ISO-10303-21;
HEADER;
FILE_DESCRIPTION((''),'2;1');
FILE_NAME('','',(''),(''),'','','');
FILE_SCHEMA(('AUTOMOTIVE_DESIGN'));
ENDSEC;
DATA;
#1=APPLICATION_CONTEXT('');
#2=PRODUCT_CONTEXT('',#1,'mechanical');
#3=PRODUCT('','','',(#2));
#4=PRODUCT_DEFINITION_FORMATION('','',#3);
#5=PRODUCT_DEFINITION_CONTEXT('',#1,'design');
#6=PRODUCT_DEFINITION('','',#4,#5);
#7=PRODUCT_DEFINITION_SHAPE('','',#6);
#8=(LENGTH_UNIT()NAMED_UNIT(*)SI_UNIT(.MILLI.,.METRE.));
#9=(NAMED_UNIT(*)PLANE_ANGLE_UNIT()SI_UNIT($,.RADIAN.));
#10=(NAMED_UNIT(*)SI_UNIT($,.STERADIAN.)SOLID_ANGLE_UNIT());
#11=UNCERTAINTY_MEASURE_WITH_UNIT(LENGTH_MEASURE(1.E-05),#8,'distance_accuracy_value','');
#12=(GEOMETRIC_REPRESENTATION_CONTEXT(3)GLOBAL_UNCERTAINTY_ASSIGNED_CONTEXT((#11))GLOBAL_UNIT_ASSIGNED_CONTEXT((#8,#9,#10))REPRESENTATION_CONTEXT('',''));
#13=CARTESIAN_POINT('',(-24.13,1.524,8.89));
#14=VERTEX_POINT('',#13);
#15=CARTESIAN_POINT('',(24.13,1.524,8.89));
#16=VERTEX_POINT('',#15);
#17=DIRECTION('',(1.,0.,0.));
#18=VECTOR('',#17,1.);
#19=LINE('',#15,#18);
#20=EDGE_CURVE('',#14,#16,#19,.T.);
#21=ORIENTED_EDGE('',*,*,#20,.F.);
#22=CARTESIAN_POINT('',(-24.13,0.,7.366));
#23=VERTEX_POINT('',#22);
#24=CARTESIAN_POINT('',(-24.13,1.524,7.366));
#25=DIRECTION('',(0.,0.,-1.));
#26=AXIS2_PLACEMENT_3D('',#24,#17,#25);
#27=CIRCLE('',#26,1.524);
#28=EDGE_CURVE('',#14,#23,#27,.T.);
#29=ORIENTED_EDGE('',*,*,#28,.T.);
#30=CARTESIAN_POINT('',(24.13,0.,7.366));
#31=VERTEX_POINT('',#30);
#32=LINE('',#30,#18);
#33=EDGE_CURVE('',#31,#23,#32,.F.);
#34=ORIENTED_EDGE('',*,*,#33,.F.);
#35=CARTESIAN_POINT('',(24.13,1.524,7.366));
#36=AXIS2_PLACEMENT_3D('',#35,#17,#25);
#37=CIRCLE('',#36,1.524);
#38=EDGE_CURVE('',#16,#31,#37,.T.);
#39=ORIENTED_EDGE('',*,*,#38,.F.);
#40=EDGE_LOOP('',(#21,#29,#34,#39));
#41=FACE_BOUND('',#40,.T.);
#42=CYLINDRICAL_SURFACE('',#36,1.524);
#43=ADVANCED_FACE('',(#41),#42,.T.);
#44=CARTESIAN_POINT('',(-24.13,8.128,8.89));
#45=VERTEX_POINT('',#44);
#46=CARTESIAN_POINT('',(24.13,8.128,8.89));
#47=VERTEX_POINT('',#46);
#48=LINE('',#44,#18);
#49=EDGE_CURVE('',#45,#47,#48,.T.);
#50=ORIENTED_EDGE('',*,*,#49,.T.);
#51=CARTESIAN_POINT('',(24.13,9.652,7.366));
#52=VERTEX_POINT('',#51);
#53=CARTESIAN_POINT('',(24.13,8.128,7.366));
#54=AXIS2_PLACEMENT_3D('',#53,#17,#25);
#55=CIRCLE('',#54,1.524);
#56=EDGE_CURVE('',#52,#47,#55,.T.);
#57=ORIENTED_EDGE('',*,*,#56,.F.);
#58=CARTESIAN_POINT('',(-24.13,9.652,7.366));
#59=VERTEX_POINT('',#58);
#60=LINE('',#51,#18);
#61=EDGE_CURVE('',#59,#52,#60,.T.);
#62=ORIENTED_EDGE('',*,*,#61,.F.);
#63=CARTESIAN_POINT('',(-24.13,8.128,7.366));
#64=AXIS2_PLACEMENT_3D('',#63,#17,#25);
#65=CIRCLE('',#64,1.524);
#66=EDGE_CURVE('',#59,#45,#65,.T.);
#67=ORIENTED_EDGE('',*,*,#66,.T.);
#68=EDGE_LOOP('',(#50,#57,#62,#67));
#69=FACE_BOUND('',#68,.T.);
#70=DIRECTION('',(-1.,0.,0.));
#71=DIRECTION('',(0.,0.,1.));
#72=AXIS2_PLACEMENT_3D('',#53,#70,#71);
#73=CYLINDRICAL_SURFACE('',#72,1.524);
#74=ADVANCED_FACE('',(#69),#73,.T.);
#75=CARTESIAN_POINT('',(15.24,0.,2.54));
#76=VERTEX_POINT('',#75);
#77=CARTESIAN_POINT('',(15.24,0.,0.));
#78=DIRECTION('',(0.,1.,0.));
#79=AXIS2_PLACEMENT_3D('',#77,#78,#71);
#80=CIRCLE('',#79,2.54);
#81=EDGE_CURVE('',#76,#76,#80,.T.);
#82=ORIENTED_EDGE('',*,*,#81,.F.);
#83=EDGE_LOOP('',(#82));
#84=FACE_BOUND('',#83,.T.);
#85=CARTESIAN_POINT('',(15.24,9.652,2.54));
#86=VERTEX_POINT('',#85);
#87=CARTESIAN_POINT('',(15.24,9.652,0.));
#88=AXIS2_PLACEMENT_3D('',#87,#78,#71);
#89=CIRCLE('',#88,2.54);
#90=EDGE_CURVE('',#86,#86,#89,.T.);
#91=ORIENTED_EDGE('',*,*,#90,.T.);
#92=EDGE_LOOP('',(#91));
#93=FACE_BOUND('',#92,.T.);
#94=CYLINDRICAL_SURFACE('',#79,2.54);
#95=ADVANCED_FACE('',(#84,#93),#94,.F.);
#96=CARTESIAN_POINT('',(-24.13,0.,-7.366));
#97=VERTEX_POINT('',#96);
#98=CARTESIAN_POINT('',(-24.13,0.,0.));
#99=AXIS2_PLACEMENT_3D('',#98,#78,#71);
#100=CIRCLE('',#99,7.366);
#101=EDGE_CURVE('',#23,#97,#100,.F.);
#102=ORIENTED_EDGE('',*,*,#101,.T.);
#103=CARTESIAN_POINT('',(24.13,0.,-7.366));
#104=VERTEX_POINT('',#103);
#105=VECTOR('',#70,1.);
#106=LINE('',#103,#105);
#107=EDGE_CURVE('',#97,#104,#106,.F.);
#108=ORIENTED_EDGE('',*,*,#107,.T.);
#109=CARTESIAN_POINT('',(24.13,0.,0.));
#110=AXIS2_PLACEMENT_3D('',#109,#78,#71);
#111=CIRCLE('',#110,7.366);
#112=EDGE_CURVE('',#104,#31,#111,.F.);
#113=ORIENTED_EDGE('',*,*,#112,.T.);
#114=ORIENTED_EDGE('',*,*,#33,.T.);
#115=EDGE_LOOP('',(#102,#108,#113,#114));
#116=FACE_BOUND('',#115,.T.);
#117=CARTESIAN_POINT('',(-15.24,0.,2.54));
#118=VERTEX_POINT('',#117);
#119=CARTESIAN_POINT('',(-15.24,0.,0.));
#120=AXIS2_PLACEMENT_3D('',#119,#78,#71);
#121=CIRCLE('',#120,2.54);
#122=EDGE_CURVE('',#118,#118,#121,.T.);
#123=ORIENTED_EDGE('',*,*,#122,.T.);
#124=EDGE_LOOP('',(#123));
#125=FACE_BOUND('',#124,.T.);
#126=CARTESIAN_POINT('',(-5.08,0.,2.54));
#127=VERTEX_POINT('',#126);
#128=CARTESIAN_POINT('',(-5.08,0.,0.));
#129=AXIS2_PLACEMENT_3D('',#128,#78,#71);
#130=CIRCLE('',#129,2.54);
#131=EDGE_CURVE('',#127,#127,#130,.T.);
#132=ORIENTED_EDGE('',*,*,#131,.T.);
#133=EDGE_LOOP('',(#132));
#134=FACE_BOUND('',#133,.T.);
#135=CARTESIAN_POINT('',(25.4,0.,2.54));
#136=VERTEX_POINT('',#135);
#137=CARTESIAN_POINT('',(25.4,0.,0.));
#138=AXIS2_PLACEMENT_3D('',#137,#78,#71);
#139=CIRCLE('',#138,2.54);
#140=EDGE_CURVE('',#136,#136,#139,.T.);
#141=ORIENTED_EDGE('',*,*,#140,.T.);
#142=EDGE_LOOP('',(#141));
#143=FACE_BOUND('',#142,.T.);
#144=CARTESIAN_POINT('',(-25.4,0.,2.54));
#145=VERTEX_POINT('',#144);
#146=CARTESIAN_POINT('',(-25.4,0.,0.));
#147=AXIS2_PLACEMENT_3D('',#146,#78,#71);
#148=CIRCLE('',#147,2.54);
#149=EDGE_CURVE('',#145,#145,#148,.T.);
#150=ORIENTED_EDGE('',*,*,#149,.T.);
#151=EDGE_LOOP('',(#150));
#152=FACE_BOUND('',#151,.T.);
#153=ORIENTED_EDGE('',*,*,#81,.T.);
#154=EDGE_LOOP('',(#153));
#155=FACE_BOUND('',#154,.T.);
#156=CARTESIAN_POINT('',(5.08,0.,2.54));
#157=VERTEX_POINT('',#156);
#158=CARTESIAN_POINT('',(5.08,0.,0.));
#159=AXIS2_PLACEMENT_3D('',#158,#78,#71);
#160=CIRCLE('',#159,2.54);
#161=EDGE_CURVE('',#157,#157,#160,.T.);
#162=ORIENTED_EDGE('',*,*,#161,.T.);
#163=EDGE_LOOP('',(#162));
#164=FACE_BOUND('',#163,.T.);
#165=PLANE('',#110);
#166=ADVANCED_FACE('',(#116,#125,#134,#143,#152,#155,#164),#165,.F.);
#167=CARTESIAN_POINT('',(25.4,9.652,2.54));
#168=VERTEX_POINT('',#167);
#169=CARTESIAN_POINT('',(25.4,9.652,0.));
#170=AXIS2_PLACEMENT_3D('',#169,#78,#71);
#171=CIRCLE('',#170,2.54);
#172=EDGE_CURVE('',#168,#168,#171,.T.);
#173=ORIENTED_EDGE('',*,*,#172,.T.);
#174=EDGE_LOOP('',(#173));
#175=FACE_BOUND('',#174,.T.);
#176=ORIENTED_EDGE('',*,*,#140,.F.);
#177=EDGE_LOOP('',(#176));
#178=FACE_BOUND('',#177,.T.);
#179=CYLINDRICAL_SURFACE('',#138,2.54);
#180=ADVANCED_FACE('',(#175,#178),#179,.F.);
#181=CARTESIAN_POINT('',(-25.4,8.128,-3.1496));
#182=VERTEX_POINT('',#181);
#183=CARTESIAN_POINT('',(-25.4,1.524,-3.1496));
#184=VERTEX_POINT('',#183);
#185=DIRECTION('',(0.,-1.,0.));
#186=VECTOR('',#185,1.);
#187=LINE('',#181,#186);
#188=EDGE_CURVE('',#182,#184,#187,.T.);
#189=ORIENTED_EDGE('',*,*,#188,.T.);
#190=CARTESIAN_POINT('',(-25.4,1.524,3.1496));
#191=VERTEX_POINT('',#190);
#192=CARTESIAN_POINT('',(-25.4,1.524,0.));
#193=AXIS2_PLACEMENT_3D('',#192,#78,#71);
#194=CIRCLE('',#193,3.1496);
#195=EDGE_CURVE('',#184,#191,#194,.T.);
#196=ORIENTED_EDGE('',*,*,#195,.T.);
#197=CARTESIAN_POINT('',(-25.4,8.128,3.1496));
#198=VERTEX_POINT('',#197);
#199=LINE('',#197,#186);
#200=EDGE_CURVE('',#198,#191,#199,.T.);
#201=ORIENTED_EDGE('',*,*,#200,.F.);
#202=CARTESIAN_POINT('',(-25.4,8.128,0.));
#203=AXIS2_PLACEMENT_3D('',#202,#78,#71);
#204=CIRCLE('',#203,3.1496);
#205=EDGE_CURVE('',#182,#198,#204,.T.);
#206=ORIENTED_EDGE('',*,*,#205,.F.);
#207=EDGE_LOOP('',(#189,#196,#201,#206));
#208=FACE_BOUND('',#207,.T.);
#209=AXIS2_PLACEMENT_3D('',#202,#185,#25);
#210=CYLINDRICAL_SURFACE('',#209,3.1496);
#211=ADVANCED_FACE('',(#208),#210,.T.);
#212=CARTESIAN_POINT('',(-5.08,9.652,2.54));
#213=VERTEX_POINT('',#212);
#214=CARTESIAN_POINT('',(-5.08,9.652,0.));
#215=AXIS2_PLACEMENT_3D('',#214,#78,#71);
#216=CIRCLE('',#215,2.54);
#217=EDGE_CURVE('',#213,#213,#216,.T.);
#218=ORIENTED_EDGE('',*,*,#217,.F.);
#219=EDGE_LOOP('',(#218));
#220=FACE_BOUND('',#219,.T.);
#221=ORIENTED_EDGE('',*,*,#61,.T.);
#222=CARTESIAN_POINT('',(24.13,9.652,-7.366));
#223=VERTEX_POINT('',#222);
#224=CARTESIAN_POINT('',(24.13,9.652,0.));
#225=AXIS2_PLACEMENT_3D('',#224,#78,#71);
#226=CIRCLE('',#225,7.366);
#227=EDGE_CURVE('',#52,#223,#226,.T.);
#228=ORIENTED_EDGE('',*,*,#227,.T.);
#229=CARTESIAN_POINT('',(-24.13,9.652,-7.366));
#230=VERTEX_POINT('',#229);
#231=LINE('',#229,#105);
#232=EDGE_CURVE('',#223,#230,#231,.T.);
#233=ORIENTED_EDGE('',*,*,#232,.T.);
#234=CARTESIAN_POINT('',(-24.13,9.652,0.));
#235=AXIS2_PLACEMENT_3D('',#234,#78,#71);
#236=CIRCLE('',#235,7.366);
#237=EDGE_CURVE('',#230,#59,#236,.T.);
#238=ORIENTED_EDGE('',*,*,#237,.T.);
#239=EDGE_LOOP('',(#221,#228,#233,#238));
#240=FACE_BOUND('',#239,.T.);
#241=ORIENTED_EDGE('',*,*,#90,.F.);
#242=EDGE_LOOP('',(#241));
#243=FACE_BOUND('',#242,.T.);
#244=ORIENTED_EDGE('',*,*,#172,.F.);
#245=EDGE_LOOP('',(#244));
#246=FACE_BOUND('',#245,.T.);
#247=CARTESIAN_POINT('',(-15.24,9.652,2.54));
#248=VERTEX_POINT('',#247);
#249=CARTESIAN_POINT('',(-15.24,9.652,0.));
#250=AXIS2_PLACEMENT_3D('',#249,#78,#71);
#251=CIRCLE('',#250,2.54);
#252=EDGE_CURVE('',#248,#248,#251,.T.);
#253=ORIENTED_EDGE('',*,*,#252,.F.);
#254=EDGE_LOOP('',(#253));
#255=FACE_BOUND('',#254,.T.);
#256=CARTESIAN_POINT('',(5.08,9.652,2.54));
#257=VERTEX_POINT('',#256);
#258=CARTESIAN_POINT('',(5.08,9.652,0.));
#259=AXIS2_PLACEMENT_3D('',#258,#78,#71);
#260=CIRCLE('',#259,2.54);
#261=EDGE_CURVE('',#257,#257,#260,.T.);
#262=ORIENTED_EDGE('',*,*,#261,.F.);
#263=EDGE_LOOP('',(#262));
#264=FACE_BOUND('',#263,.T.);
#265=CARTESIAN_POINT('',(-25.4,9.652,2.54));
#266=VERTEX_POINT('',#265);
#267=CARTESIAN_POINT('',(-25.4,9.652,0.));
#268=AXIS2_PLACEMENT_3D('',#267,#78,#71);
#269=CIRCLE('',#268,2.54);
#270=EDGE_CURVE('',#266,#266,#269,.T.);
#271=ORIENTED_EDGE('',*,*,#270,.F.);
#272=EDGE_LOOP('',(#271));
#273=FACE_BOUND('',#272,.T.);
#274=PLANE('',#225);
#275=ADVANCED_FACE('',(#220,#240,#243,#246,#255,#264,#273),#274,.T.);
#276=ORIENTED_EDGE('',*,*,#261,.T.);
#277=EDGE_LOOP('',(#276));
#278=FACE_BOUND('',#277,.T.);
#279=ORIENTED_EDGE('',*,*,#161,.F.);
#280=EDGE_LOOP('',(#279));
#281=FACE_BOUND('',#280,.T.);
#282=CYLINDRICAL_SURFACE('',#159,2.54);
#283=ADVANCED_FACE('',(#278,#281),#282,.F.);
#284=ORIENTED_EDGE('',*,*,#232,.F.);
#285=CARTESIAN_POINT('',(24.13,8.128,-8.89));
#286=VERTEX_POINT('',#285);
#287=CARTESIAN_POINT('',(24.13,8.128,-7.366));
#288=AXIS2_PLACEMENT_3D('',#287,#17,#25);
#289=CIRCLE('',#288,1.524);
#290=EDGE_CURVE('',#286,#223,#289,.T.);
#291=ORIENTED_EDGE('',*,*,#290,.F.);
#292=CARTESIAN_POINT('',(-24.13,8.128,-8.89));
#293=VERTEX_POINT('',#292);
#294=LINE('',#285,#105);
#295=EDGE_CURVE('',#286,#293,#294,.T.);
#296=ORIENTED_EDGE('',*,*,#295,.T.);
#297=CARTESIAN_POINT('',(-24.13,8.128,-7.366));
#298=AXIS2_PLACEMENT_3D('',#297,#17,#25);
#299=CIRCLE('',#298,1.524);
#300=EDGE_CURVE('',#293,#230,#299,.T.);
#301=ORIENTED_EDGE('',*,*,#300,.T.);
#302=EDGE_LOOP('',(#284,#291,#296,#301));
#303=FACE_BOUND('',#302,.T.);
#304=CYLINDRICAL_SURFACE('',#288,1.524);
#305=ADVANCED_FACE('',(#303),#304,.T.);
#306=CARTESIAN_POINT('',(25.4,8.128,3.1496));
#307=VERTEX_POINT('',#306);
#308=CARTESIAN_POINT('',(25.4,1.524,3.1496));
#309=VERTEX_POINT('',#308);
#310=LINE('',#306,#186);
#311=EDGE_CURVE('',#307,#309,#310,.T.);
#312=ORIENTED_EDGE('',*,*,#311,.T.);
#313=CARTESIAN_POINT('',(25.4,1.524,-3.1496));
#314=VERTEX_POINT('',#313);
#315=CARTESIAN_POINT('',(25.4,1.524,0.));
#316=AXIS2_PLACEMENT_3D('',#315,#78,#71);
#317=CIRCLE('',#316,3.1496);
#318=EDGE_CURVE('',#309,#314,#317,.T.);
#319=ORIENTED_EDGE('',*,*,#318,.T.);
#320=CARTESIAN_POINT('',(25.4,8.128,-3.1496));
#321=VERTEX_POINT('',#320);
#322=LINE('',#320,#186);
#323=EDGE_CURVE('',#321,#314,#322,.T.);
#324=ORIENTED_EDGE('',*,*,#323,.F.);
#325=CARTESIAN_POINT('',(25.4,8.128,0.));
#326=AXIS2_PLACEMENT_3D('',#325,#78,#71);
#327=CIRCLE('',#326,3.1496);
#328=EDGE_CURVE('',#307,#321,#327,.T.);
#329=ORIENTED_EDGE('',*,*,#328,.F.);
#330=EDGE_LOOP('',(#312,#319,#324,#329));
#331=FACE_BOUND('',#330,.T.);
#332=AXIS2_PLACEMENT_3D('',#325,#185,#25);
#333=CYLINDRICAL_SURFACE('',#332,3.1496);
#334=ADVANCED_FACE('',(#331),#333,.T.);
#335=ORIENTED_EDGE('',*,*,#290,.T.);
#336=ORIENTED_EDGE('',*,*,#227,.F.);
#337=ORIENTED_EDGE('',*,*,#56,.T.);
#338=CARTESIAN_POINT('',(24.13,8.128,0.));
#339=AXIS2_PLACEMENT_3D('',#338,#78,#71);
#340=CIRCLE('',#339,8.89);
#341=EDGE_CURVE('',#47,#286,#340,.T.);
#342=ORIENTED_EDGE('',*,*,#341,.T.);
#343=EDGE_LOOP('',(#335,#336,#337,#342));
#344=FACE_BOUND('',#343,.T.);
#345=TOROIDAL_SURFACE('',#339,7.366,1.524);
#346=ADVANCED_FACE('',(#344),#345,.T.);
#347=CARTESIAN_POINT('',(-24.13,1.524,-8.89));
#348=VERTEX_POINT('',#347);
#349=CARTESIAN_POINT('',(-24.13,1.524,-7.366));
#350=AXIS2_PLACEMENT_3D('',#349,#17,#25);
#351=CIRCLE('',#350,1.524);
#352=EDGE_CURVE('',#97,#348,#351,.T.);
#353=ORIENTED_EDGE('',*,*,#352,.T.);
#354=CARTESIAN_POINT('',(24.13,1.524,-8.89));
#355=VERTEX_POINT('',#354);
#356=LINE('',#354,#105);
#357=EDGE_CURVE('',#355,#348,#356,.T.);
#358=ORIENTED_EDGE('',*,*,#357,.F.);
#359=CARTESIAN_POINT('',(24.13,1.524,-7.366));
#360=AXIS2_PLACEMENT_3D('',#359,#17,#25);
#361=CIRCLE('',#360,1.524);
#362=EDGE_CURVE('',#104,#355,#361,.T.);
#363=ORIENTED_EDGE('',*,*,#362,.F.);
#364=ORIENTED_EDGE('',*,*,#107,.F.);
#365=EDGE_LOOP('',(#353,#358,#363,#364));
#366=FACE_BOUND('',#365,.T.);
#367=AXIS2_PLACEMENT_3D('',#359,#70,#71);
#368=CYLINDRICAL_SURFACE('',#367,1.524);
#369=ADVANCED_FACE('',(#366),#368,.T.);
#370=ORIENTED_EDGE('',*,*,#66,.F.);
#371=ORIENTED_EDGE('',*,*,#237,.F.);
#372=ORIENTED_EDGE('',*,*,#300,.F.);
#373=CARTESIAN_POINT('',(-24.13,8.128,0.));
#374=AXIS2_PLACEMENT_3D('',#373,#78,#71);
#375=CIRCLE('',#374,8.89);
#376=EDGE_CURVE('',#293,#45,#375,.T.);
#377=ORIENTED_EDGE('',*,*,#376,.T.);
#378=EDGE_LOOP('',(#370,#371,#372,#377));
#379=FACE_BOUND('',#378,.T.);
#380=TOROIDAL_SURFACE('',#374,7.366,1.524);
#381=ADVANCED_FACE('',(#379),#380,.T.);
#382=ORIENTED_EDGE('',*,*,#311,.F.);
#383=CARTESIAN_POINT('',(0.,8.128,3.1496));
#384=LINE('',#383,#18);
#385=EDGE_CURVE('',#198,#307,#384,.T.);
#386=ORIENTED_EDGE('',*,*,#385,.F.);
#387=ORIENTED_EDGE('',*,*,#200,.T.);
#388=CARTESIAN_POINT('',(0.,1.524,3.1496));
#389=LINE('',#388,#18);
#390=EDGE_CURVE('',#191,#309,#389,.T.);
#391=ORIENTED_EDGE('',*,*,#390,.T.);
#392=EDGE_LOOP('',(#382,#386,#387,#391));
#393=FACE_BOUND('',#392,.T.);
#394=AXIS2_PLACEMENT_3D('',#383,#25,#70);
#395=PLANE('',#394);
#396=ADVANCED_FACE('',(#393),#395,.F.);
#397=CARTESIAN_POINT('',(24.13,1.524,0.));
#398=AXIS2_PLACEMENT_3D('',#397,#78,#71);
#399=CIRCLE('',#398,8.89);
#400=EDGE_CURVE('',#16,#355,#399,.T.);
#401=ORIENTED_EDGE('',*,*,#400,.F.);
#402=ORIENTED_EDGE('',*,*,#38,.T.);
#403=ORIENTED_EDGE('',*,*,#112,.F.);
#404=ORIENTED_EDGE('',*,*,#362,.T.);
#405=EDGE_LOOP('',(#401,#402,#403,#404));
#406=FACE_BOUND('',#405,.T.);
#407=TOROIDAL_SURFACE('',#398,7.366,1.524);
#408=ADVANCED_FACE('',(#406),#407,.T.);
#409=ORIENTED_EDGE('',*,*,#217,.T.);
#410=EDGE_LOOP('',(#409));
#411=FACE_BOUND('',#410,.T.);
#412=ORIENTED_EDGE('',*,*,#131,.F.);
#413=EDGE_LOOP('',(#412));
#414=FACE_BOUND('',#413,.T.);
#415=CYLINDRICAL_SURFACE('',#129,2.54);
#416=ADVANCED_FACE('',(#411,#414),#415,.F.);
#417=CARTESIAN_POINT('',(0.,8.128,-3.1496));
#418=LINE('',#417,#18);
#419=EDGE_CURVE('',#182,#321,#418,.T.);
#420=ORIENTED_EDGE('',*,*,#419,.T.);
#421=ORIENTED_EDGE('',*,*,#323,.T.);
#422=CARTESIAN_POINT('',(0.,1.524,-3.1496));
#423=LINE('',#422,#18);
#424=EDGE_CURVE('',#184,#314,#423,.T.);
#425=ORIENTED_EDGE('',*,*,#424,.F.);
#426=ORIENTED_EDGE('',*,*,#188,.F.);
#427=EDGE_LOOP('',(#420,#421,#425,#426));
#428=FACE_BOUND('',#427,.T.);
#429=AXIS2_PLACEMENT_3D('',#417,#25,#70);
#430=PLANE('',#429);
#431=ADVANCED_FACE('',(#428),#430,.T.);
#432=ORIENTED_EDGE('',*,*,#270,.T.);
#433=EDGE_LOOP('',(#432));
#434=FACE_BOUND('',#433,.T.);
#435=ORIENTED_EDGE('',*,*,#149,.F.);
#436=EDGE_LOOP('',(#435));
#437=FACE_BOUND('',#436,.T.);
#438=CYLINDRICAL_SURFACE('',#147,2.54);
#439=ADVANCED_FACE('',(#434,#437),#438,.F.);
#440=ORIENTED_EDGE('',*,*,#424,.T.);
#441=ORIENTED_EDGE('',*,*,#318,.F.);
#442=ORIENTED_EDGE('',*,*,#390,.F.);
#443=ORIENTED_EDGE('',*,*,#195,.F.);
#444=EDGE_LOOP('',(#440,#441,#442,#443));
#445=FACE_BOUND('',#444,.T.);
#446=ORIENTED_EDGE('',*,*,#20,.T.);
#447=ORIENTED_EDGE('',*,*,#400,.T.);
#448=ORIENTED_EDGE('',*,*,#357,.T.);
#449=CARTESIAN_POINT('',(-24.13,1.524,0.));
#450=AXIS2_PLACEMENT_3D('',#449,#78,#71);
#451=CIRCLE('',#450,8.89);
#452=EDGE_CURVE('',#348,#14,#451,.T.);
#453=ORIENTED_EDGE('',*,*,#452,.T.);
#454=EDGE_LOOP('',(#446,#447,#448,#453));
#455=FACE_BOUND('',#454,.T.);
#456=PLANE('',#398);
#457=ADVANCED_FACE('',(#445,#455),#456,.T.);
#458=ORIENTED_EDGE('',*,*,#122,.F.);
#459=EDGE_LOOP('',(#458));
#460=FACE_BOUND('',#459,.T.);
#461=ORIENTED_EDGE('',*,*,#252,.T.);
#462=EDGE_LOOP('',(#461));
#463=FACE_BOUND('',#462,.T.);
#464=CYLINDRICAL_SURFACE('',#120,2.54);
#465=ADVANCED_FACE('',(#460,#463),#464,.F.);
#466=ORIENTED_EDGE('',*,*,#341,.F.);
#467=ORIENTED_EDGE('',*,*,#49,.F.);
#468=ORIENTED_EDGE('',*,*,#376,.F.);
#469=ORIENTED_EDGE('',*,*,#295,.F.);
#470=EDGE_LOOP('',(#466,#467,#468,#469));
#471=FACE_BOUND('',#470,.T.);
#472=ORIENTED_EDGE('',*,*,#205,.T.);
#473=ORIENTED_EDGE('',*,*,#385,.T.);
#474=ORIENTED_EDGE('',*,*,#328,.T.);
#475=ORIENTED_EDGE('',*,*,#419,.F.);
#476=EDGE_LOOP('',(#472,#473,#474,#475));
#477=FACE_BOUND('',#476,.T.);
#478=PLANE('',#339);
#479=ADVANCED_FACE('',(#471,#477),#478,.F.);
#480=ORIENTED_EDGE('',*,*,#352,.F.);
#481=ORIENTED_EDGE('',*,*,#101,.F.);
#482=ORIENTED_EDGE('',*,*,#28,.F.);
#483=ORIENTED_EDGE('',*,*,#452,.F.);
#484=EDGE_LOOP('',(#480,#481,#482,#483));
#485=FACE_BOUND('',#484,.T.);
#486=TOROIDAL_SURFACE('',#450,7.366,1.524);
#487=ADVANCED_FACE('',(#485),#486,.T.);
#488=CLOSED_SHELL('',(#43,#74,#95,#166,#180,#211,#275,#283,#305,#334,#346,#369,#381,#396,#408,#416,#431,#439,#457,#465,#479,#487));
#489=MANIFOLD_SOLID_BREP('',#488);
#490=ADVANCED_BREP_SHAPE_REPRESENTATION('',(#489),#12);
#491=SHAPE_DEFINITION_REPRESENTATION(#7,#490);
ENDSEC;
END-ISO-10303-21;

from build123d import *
from build123d.topology import SkipClean

# Parameters (mm, degrees)
BOSS_EXTRUDE1_DEPTH     = 1.524
SKETCH2_R               = 1.27
BOSS_EXTRUDE2_DEPTH     = 6.604
BOSS_EXTRUDE3_DEPTH     = 1.524
FILLET1_R               = 1.524
CUT_EXTRUDE1_DEPTH      = 36.148497607
CUT_EXTRUDE1_DEPTH_BACK = 36.148497607
SKETCH2_3_R             = 1.27
CUT_EXTRUDE2_DEPTH      = 36.531867443
CUT_EXTRUDE2_DEPTH_BACK = 36.531867443
SKETCH4_R               = 2.54


with BuildPart() as part:
    # Sketch1 → Boss-Extrude1 (new body)
    with BuildSketch(Plane(origin=(0, 0, 0), x_dir=(1, 0, 0), z_dir=(0, 1, 0))):
        with BuildLine():
            Line((24.13, -8.89), (-24.13, -8.89))
            ThreePointArc((-24.13, -8.89), (-33.02, 0), (-24.13, 8.89))
            Line((-24.13, 8.89), (24.13, 8.89))
            ThreePointArc((24.13, 8.89), (33.02, 0), (24.13, -8.89))
        make_face()
    extrude(amount=BOSS_EXTRUDE1_DEPTH)

    # Sketch2 → Boss-Extrude2 (add)
    # profile 1 of 35: a face of its own
    with BuildSketch(Plane(origin=(0, 1.524, 0), x_dir=(1, 0, 0), z_dir=(0, 1, 0))):
        with BuildLine():
            ThreePointArc((-22.643661095, 1.524), (-23.8000016, 2.71292928), (-25.4, 3.1496))
            ThreePointArc((-25.4, 3.1496), (-28.5496, 0), (-25.4, -3.1496))
            ThreePointArc((-25.4, -3.1496), (-23.8000016, -2.71292928), (-22.643661095, -1.524))
            Line((-22.643661095, -1.524), (-25.4, -1.524))
            Line((-25.4, -1.524), (-25.4, -1.27))
            ThreePointArc((-25.4, -1.27), (-26.67, 0), (-25.4, 1.27))
            Line((-25.4, 1.27), (-25.4, 1.524))
            Line((-25.4, 1.524), (-22.643661095, 1.524))
        make_face()
    # profile 2 of 35: a face of its own
    with BuildSketch(Plane(origin=(0, 1.524, 0), x_dir=(1, 0, 0), z_dir=(0, 1, 0))):
        with BuildLine():
            ThreePointArc((-22.2504, 0), (-22.35029959, 0.786960972), (-22.643661095, 1.524))
            Line((-22.643661095, 1.524), (-25.4, 1.524))
            Line((-25.4, 1.524), (-25.4, 1.27))
            ThreePointArc((-25.4, 1.27), (-24.501974388, 0.898025612), (-24.13, 0))
            ThreePointArc((-24.13, 0), (-24.501974388, -0.898025612), (-25.4, -1.27))
            Line((-25.4, -1.27), (-25.4, -1.524))
            Line((-25.4, -1.524), (-22.643661095, -1.524))
            ThreePointArc((-22.643661095, -1.524), (-22.35029959, -0.786960972), (-22.2504, 0))
        make_face()
    # profile 3 of 35: a face of its own
    with BuildSketch(Plane(origin=(0, 1.524, 0), x_dir=(1, 0, 0), z_dir=(0, 1, 0))):
        with BuildLine():
            Line((-15.24, 3.1496), (-25.4, 3.1496))
            ThreePointArc((-25.4, 3.1496), (-23.8000016, 2.71292928), (-22.643661095, 1.524))
            Line((-22.643661095, 1.524), (-17.996338905, 1.524))
            ThreePointArc((-17.996338905, 1.524), (-16.8399984, 2.71292928), (-15.24, 3.1496))
        make_face()
    # profile 4 of 35: a face of its own
    with BuildSketch(Plane(origin=(0, 1.524, 0), x_dir=(1, 0, 0), z_dir=(0, 1, 0))):
        with BuildLine():
            Line((-17.996338905, 1.524), (-22.643661095, 1.524))
            ThreePointArc((-22.643661095, 1.524), (-22.35029959, 0.786960972), (-22.2504, 0))
            ThreePointArc((-22.2504, 0), (-22.35029959, -0.786960972), (-22.643661095, -1.524))
            Line((-22.643661095, -1.524), (-17.996338905, -1.524))
            ThreePointArc((-17.996338905, -1.524), (-18.3896, 0), (-17.996338905, 1.524))
        make_face()
    # profile 5 of 35: a face of its own
    with BuildSketch(Plane(origin=(0, 1.524, 0), x_dir=(1, 0, 0), z_dir=(0, 1, 0))):
        with BuildLine():
            ThreePointArc((-22.643661095, 1.524), (-23.8000016, 2.71292928), (-25.4, 3.1496))
            ThreePointArc((-25.4, 3.1496), (-28.5496, 0), (-25.4, -3.1496))
            ThreePointArc((-25.4, -3.1496), (-23.8000016, -2.71292928), (-22.643661095, -1.524))
            Line((-22.643661095, -1.524), (-25.4, -1.524))
            Line((-25.4, -1.524), (-25.4, -1.27))
            ThreePointArc((-25.4, -1.27), (-26.67, 0), (-25.4, 1.27))
            Line((-25.4, 1.27), (-25.4, 1.524))
            Line((-25.4, 1.524), (-22.643661095, 1.524))
        make_face()
    # profile 6 of 35: a face of its own
    with BuildSketch(Plane(origin=(0, 1.524, 0), x_dir=(1, 0, 0), z_dir=(0, 1, 0))):
        with BuildLine():
            ThreePointArc((-22.2504, 0), (-22.35029959, 0.786960972), (-22.643661095, 1.524))
            Line((-22.643661095, 1.524), (-25.4, 1.524))
            Line((-25.4, 1.524), (-25.4, 1.27))
            ThreePointArc((-25.4, 1.27), (-24.501974388, 0.898025612), (-24.13, 0))
            ThreePointArc((-24.13, 0), (-24.501974388, -0.898025612), (-25.4, -1.27))
            Line((-25.4, -1.27), (-25.4, -1.524))
            Line((-25.4, -1.524), (-22.643661095, -1.524))
            ThreePointArc((-22.643661095, -1.524), (-22.35029959, -0.786960972), (-22.2504, 0))
        make_face()
    # profile 7 of 35: a face of its own
    with BuildSketch(Plane(origin=(0, 1.524, 0), x_dir=(1, 0, 0), z_dir=(0, 1, 0))):
        with BuildLine():
            ThreePointArc((-22.643661095, -1.524), (-23.8000016, -2.71292928), (-25.4, -3.1496))
            Line((-25.4, -3.1496), (-15.24, -3.1496))
            ThreePointArc((-15.24, -3.1496), (-16.8399984, -2.71292928), (-17.996338905, -1.524))
            Line((-17.996338905, -1.524), (-22.643661095, -1.524))
        make_face()
    # profile 8 of 35: a face of its own
    with BuildSketch(Plane(origin=(0, 1.524, 0), x_dir=(1, 0, 0), z_dir=(0, 1, 0))):
        with BuildLine():
            ThreePointArc((-17.996338905, -1.524), (-16.8399984, -2.71292928), (-15.24, -3.1496))
            ThreePointArc((-15.24, -3.1496), (-13.6400016, -2.71292928), (-12.483661095, -1.524))
            Line((-12.483661095, -1.524), (-17.996338905, -1.524))
        make_face()
    # profile 9 of 35: a face of its own
    with BuildSketch(Plane(origin=(0, 1.524, 0), x_dir=(1, 0, 0), z_dir=(0, 1, 0))):
        with BuildLine():
            ThreePointArc((-12.0904, 0), (-12.19029959, 0.786960972), (-12.483661095, 1.524))
            Line((-12.483661095, 1.524), (-17.996338905, 1.524))
            ThreePointArc((-17.996338905, 1.524), (-18.3896, 0), (-17.996338905, -1.524))
            Line((-17.996338905, -1.524), (-12.483661095, -1.524))
            ThreePointArc((-12.483661095, -1.524), (-12.19029959, -0.786960972), (-12.0904, 0))
        make_face()
        with Locations(Location((-15.24, 0, 0), (0, 0, 90))):
            Circle(SKETCH2_R, mode=Mode.SUBTRACT)
    # profile 10 of 35: a face of its own
    with BuildSketch(Plane(origin=(0, 1.524, 0), x_dir=(1, 0, 0), z_dir=(0, 1, 0))):
        with BuildLine():
            ThreePointArc((-12.483661095, 1.524), (-13.6400016, 2.71292928), (-15.24, 3.1496))
            ThreePointArc((-15.24, 3.1496), (-16.8399984, 2.71292928), (-17.996338905, 1.524))
            Line((-17.996338905, 1.524), (-12.483661095, 1.524))
        make_face()
    # profile 11 of 35: a face of its own
    with BuildSketch(Plane(origin=(0, 1.524, 0), x_dir=(1, 0, 0), z_dir=(0, 1, 0))):
        with BuildLine():
            Line((-5.080000024, 3.1496), (-15.24, 3.1496))
            ThreePointArc((-15.24, 3.1496), (-13.6400016, 2.71292928), (-12.483661095, 1.524))
            Line((-12.483661095, 1.524), (-7.836338905, 1.524))
            ThreePointArc((-7.836338905, 1.524), (-6.67999841, 2.712929274), (-5.080000024, 3.1496))
        make_face()
    # profile 12 of 35: a face of its own
    with BuildSketch(Plane(origin=(0, 1.524, 0), x_dir=(1, 0, 0), z_dir=(0, 1, 0))):
        with BuildLine():
            Line((-7.836338905, 1.524), (-12.483661095, 1.524))
            ThreePointArc((-12.483661095, 1.524), (-12.19029959, 0.786960972), (-12.0904, 0))
            ThreePointArc((-12.0904, 0), (-12.19029959, -0.786960972), (-12.483661095, -1.524))
            Line((-12.483661095, -1.524), (-7.836338905, -1.524))
            ThreePointArc((-7.836338905, -1.524), (-8.2296, 0), (-7.836338905, 1.524))
        make_face()
    # profile 13 of 35: a face of its own
    with BuildSketch(Plane(origin=(0, 1.524, 0), x_dir=(1, 0, 0), z_dir=(0, 1, 0))):
        with BuildLine():
            ThreePointArc((-12.483661095, -1.524), (-13.6400016, -2.71292928), (-15.24, -3.1496))
            Line((-15.24, -3.1496), (-5.080000009, -3.1496))
            ThreePointArc((-5.080000009, -3.1496), (-6.679998404, -2.712929278), (-7.836338905, -1.524))
            Line((-7.836338905, -1.524), (-12.483661095, -1.524))
        make_face()
    # profile 14 of 35: a face of its own
    with BuildSketch(Plane(origin=(0, 1.524, 0), x_dir=(1, 0, 0), z_dir=(0, 1, 0))):
        with BuildLine():
            ThreePointArc((-7.836338905, -1.524), (-6.679998404, -2.712929278), (-5.080000009, -3.1496))
            ThreePointArc((-5.080000009, -3.1496), (-3.480001604, -2.712929283), (-2.323661095, -1.524))
            Line((-2.323661095, -1.524), (-7.836338905, -1.524))
        make_face()
    # profile 15 of 35: a face of its own
    with BuildSketch(Plane(origin=(0, 1.524, 0), x_dir=(1, 0, 0), z_dir=(0, 1, 0))):
        with BuildLine():
            ThreePointArc((-1.9304, 0), (-2.03029959, 0.786960972), (-2.323661095, 1.524))
            Line((-2.323661095, 1.524), (-7.836338905, 1.524))
            ThreePointArc((-7.836338905, 1.524), (-8.2296, 0), (-7.836338905, -1.524))
            Line((-7.836338905, -1.524), (-2.323661095, -1.524))
            ThreePointArc((-2.323661095, -1.524), (-2.03029959, -0.786960972), (-1.9304, 0))
        make_face()
        with Locations(Location((-5.08, 0, 0), (0, 0, 90))):
            Circle(SKETCH2_R, mode=Mode.SUBTRACT)
    # profile 16 of 35: a face of its own
    with BuildSketch(Plane(origin=(0, 1.524, 0), x_dir=(1, 0, 0), z_dir=(0, 1, 0))):
        with BuildLine():
            ThreePointArc((-2.323661095, 1.524), (-3.48000161, 2.712929286), (-5.080000024, 3.1496))
            ThreePointArc((-5.080000024, 3.1496), (-6.67999841, 2.712929274), (-7.836338905, 1.524))
            Line((-7.836338905, 1.524), (-2.323661095, 1.524))
        make_face()
    # profile 17 of 35: a face of its own
    with BuildSketch(Plane(origin=(0, 1.524, 0), x_dir=(1, 0, 0), z_dir=(0, 1, 0))):
        with BuildLine():
            Line((5.079999991, 3.1496), (-5.080000024, 3.1496))
            ThreePointArc((-5.080000024, 3.1496), (-3.48000161, 2.712929286), (-2.323661095, 1.524))
            Line((-2.323661095, 1.524), (2.323661095, 1.524))
            ThreePointArc((2.323661095, 1.524), (3.480001596, 2.712929278), (5.079999991, 3.1496))
        make_face()
    # profile 18 of 35: a face of its own
    with BuildSketch(Plane(origin=(0, 1.524, 0), x_dir=(1, 0, 0), z_dir=(0, 1, 0))):
        with BuildLine():
            Line((2.323661095, 1.524), (-2.323661095, 1.524))
            ThreePointArc((-2.323661095, 1.524), (-2.03029959, 0.786960972), (-1.9304, 0))
            ThreePointArc((-1.9304, 0), (-2.03029959, -0.786960972), (-2.323661095, -1.524))
            Line((-2.323661095, -1.524), (2.323661095, -1.524))
            ThreePointArc((2.323661095, -1.524), (1.9304, 0), (2.323661095, 1.524))
        make_face()
    # profile 19 of 35: a face of its own
    with BuildSketch(Plane(origin=(0, 1.524, 0), x_dir=(1, 0, 0), z_dir=(0, 1, 0))):
        with BuildLine():
            ThreePointArc((-2.323661095, -1.524), (-3.480001604, -2.712929283), (-5.080000009, -3.1496))
            Line((-5.080000009, -3.1496), (5.079999981, -3.1496))
            ThreePointArc((5.079999981, -3.1496), (3.480001592, -2.712929275), (2.323661095, -1.524))
            Line((2.323661095, -1.524), (-2.323661095, -1.524))
        make_face()
    # profile 20 of 35: a face of its own
    with BuildSketch(Plane(origin=(0, 1.524, 0), x_dir=(1, 0, 0), z_dir=(0, 1, 0))):
        with BuildLine():
            ThreePointArc((2.323661095, -1.524), (3.480001592, -2.712929275), (5.079999981, -3.1496))
            ThreePointArc((5.079999981, -3.1496), (6.679998392, -2.712929285), (7.836338905, -1.524))
            Line((7.836338905, -1.524), (2.323661095, -1.524))
        make_face()
    # profile 21 of 35: a face of its own
    with BuildSketch(Plane(origin=(0, 1.524, 0), x_dir=(1, 0, 0), z_dir=(0, 1, 0))):
        with BuildLine():
            ThreePointArc((8.2296, 0), (8.12970041, 0.786960972), (7.836338905, 1.524))
            Line((7.836338905, 1.524), (2.323661095, 1.524))
            ThreePointArc((2.323661095, 1.524), (1.9304, 0), (2.323661095, -1.524))
            Line((2.323661095, -1.524), (7.836338905, -1.524))
            ThreePointArc((7.836338905, -1.524), (8.12970041, -0.786960972), (8.2296, 0))
        make_face()
        with Locations(Location((5.08, 0, 0), (0, 0, 90))):
            Circle(SKETCH2_R, mode=Mode.SUBTRACT)
    # profile 22 of 35: a face of its own
    with BuildSketch(Plane(origin=(0, 1.524, 0), x_dir=(1, 0, 0), z_dir=(0, 1, 0))):
        with BuildLine():
            ThreePointArc((7.836338905, 1.524), (6.679998396, 2.712929283), (5.079999991, 3.1496))
            ThreePointArc((5.079999991, 3.1496), (3.480001596, 2.712929278), (2.323661095, 1.524))
            Line((2.323661095, 1.524), (7.836338905, 1.524))
        make_face()
    # profile 23 of 35: a face of its own
    with BuildSketch(Plane(origin=(0, 1.524, 0), x_dir=(1, 0, 0), z_dir=(0, 1, 0))):
        with BuildLine():
            Line((15.240000007, 3.1496), (5.079999991, 3.1496))
            ThreePointArc((5.079999991, 3.1496), (6.679998396, 2.712929283), (7.836338905, 1.524))
            Line((7.836338905, 1.524), (12.483661095, 1.524))
            ThreePointArc((12.483661095, 1.524), (13.640001603, 2.712929282), (15.240000007, 3.1496))
        make_face()
    # profile 24 of 35: a face of its own
    with BuildSketch(Plane(origin=(0, 1.524, 0), x_dir=(1, 0, 0), z_dir=(0, 1, 0))):
        with BuildLine():
            Line((12.483661095, 1.524), (7.836338905, 1.524))
            ThreePointArc((7.836338905, 1.524), (8.12970041, 0.786960972), (8.2296, 0))
            ThreePointArc((8.2296, 0), (8.12970041, -0.786960972), (7.836338905, -1.524))
            Line((7.836338905, -1.524), (12.483661095, -1.524))
            ThreePointArc((12.483661095, -1.524), (12.0904, 0), (12.483661095, 1.524))
        make_face()
    # profile 25 of 35: a face of its own
    with BuildSketch(Plane(origin=(0, 1.524, 0), x_dir=(1, 0, 0), z_dir=(0, 1, 0))):
        with BuildLine():
            ThreePointArc((7.836338905, -1.524), (6.679998392, -2.712929285), (5.079999981, -3.1496))
            Line((5.079999981, -3.1496), (15.24, -3.1496))
            ThreePointArc((15.24, -3.1496), (13.6400016, -2.71292928), (12.483661095, -1.524))
            Line((12.483661095, -1.524), (7.836338905, -1.524))
        make_face()
    # profile 26 of 35: a face of its own
    with BuildSketch(Plane(origin=(0, 1.524, 0), x_dir=(1, 0, 0), z_dir=(0, 1, 0))):
        with BuildLine():
            ThreePointArc((12.483661095, -1.524), (13.6400016, -2.71292928), (15.24, -3.1496))
            ThreePointArc((15.24, -3.1496), (16.8399984, -2.71292928), (17.996338905, -1.524))
            Line((17.996338905, -1.524), (12.483661095, -1.524))
        make_face()
    # profile 27 of 35: a face of its own
    with BuildSketch(Plane(origin=(0, 1.524, 0), x_dir=(1, 0, 0), z_dir=(0, 1, 0))):
        with BuildLine():
            ThreePointArc((18.3896, 0), (18.28970041, 0.786960972), (17.996338905, 1.524))
            Line((17.996338905, 1.524), (12.483661095, 1.524))
            ThreePointArc((12.483661095, 1.524), (12.0904, 0), (12.483661095, -1.524))
            Line((12.483661095, -1.524), (17.996338905, -1.524))
            ThreePointArc((17.996338905, -1.524), (18.28970041, -0.786960972), (18.3896, 0))
        make_face()
        with Locations(Location((15.24, 0, 0), (0, 0, 90))):
            Circle(SKETCH2_R, mode=Mode.SUBTRACT)
    # profile 28 of 35: a face of its own
    with BuildSketch(Plane(origin=(0, 1.524, 0), x_dir=(1, 0, 0), z_dir=(0, 1, 0))):
        with BuildLine():
            ThreePointArc((17.996338905, 1.524), (16.839998403, 2.712929279), (15.240000007, 3.1496))
            ThreePointArc((15.240000007, 3.1496), (13.640001603, 2.712929282), (12.483661095, 1.524))
            Line((12.483661095, 1.524), (17.996338905, 1.524))
        make_face()
    # profile 29 of 35: a face of its own
    with BuildSketch(Plane(origin=(0, 1.524, 0), x_dir=(1, 0, 0), z_dir=(0, 1, 0))):
        with BuildLine():
            Line((25.4, 3.1496), (15.240000007, 3.1496))
            ThreePointArc((15.240000007, 3.1496), (16.839998403, 2.712929279), (17.996338905, 1.524))
            Line((17.996338905, 1.524), (22.643661095, 1.524))
            ThreePointArc((22.643661095, 1.524), (23.8000016, 2.71292928), (25.4, 3.1496))
        make_face()
    # profile 30 of 35: a face of its own
    with BuildSketch(Plane(origin=(0, 1.524, 0), x_dir=(1, 0, 0), z_dir=(0, 1, 0))):
        with BuildLine():
            ThreePointArc((17.996338905, -1.524), (16.8399984, -2.71292928), (15.24, -3.1496))
            Line((15.24, -3.1496), (25.4, -3.1496))
            ThreePointArc((25.4, -3.1496), (23.8000016, -2.71292928), (22.643661095, -1.524))
            Line((22.643661095, -1.524), (17.996338905, -1.524))
        make_face()
    # profile 31 of 35: a face of its own
    with BuildSketch(Plane(origin=(0, 1.524, 0), x_dir=(1, 0, 0), z_dir=(0, 1, 0))):
        with BuildLine():
            Line((22.643661095, 1.524), (17.996338905, 1.524))
            ThreePointArc((17.996338905, 1.524), (18.28970041, 0.786960972), (18.3896, 0))
            ThreePointArc((18.3896, 0), (18.28970041, -0.786960972), (17.996338905, -1.524))
            Line((17.996338905, -1.524), (22.643661095, -1.524))
            ThreePointArc((22.643661095, -1.524), (22.2504, 0), (22.643661095, 1.524))
        make_face()
    # profile 32 of 35: a face of its own
    with BuildSketch(Plane(origin=(0, 1.524, 0), x_dir=(1, 0, 0), z_dir=(0, 1, 0))):
        with BuildLine():
            ThreePointArc((28.5496, 0), (27.627103518, 2.227103518), (25.4, 3.1496))
            ThreePointArc((25.4, 3.1496), (23.8000016, 2.71292928), (22.643661095, 1.524))
            Line((22.643661095, 1.524), (25.4, 1.524))
            Line((25.4, 1.524), (25.4, 1.27))
            ThreePointArc((25.4, 1.27), (26.298025612, 0.898025612), (26.67, 0))
            ThreePointArc((26.67, 0), (26.298025612, -0.898025612), (25.4, -1.27))
            Line((25.4, -1.27), (25.4, -1.524))
            Line((25.4, -1.524), (22.643661095, -1.524))
            ThreePointArc((22.643661095, -1.524), (23.8000016, -2.71292928), (25.4, -3.1496))
            ThreePointArc((25.4, -3.1496), (27.627103518, -2.227103518), (28.5496, 0))
        make_face()
    # profile 33 of 35: a face of its own
    with BuildSketch(Plane(origin=(0, 1.524, 0), x_dir=(1, 0, 0), z_dir=(0, 1, 0))):
        with BuildLine():
            Line((25.4, 1.524), (22.643661095, 1.524))
            ThreePointArc((22.643661095, 1.524), (22.2504, 0), (22.643661095, -1.524))
            Line((22.643661095, -1.524), (25.4, -1.524))
            Line((25.4, -1.524), (25.4, -1.27))
            ThreePointArc((25.4, -1.27), (24.13, 0), (25.4, 1.27))
            Line((25.4, 1.27), (25.4, 1.524))
        make_face()
    # profile 34 of 35: a face of its own
    with BuildSketch(Plane(origin=(0, 1.524, 0), x_dir=(1, 0, 0), z_dir=(0, 1, 0))):
        with BuildLine():
            ThreePointArc((28.5496, 0), (27.627103518, 2.227103518), (25.4, 3.1496))
            ThreePointArc((25.4, 3.1496), (23.8000016, 2.71292928), (22.643661095, 1.524))
            Line((22.643661095, 1.524), (25.4, 1.524))
            Line((25.4, 1.524), (25.4, 1.27))
            ThreePointArc((25.4, 1.27), (26.298025612, 0.898025612), (26.67, 0))
            ThreePointArc((26.67, 0), (26.298025612, -0.898025612), (25.4, -1.27))
            Line((25.4, -1.27), (25.4, -1.524))
            Line((25.4, -1.524), (22.643661095, -1.524))
            ThreePointArc((22.643661095, -1.524), (23.8000016, -2.71292928), (25.4, -3.1496))
            ThreePointArc((25.4, -3.1496), (27.627103518, -2.227103518), (28.5496, 0))
        make_face()
    # profile 35 of 35: a face of its own
    with BuildSketch(Plane(origin=(0, 1.524, 0), x_dir=(1, 0, 0), z_dir=(0, 1, 0))):
        with BuildLine():
            Line((25.4, 1.524), (22.643661095, 1.524))
            ThreePointArc((22.643661095, 1.524), (22.2504, 0), (22.643661095, -1.524))
            Line((22.643661095, -1.524), (25.4, -1.524))
            Line((25.4, -1.524), (25.4, -1.27))
            ThreePointArc((25.4, -1.27), (24.13, 0), (25.4, 1.27))
            Line((25.4, 1.27), (25.4, 1.524))
        make_face()
    extrude(amount=BOSS_EXTRUDE2_DEPTH)

    # Sketch3 → Boss-Extrude3 (add)
    with BuildSketch(Plane(origin=(0, 8.128, 0), x_dir=(1, 0, 0), z_dir=(0, 1, 0))):
        with BuildLine():
            Line((-24.13, -8.89), (24.13, -8.89))
            ThreePointArc((24.13, -8.89), (33.02, 0), (24.13, 8.89))
            Line((24.13, 8.89), (-24.13, 8.89))
            ThreePointArc((-24.13, 8.89), (-33.02, 0), (-24.13, -8.89))
        make_face()
    extrude(amount=BOSS_EXTRUDE3_DEPTH)

    # Fillet1
    fillet1_edges = [part.edges().sort_by_distance(p)[0] for p in [
        (33.02, 0, 0),
        (0, 0, -8.89),
        (0, 0, 8.89),
        (-33.02, 0, 0),
        (33.02, 9.652, 0),
        (0, 9.652, 8.89),
        (0, 9.652, -8.89),
        (-33.02, 9.652, 0),
    ]]
    fillet(fillet1_edges, radius=FILLET1_R - 0.0001)  # a hair under: the kernel refuses the full size

    # Sketch2<3> → Cut-Extrude1 (cut, two sides: drawn at the far end of the back side and taken through both)
    with SkipClean():  # the faces are left unmerged after this step: merging them gives an invalid solid
        with BuildSketch(Plane(origin=(0, 1.524, 0), x_dir=(1, 0, 0), z_dir=(0, 1, 0)).offset(-CUT_EXTRUDE1_DEPTH_BACK)):
            with Locations(Location((-25.4, 0, 0), (0, 0, 90))):
                Circle(SKETCH2_3_R)
            with Locations(Location((-15.24, 0, 0), (0, 0, 90))):
                Circle(SKETCH2_3_R)
            with Locations(Location((-5.08, 0, 0), (0, 0, 90))):
                Circle(SKETCH2_3_R)
            with Locations(Location((5.08, 0, 0), (0, 0, 90))):
                Circle(SKETCH2_3_R)
            with Locations(Location((15.24, 0, 0), (0, 0, 90))):
                Circle(SKETCH2_3_R)
            with Locations(Location((25.4, 0, 0), (0, 0, 90))):
                Circle(SKETCH2_3_R)
        extrude(amount=CUT_EXTRUDE1_DEPTH + CUT_EXTRUDE1_DEPTH_BACK, mode=Mode.SUBTRACT)

    # Sketch4 → Cut-Extrude2 (cut, two sides: drawn at the far end of the back side and taken through both)
    with BuildSketch(Plane(origin=(0, 9.652, 0), x_dir=(1, 0, 0), z_dir=(0, 1, 0)).offset(-CUT_EXTRUDE2_DEPTH_BACK)):
        with Locations(Location((-25.4, 0, 0), (0, 0, 270))):
            Circle(SKETCH4_R)
        with Locations(Location((-15.24, 0, 0), (0, 0, 270))):
            Circle(SKETCH4_R)
        with Locations(Location((-5.08, 0, 0), (0, 0, 270))):
            Circle(SKETCH4_R)
        with Locations(Location((5.08, 0, 0), (0, 0, 270))):
            Circle(SKETCH4_R)
        with Locations(Location((15.24, 0, 0), (0, 0, 270))):
            Circle(SKETCH4_R)
        with Locations(Location((25.4, 0, 0), (0, 0, 270))):
            Circle(SKETCH4_R)
    extrude(amount=CUT_EXTRUDE2_DEPTH + CUT_EXTRUDE2_DEPTH_BACK, mode=Mode.SUBTRACT)


solid = part.part
